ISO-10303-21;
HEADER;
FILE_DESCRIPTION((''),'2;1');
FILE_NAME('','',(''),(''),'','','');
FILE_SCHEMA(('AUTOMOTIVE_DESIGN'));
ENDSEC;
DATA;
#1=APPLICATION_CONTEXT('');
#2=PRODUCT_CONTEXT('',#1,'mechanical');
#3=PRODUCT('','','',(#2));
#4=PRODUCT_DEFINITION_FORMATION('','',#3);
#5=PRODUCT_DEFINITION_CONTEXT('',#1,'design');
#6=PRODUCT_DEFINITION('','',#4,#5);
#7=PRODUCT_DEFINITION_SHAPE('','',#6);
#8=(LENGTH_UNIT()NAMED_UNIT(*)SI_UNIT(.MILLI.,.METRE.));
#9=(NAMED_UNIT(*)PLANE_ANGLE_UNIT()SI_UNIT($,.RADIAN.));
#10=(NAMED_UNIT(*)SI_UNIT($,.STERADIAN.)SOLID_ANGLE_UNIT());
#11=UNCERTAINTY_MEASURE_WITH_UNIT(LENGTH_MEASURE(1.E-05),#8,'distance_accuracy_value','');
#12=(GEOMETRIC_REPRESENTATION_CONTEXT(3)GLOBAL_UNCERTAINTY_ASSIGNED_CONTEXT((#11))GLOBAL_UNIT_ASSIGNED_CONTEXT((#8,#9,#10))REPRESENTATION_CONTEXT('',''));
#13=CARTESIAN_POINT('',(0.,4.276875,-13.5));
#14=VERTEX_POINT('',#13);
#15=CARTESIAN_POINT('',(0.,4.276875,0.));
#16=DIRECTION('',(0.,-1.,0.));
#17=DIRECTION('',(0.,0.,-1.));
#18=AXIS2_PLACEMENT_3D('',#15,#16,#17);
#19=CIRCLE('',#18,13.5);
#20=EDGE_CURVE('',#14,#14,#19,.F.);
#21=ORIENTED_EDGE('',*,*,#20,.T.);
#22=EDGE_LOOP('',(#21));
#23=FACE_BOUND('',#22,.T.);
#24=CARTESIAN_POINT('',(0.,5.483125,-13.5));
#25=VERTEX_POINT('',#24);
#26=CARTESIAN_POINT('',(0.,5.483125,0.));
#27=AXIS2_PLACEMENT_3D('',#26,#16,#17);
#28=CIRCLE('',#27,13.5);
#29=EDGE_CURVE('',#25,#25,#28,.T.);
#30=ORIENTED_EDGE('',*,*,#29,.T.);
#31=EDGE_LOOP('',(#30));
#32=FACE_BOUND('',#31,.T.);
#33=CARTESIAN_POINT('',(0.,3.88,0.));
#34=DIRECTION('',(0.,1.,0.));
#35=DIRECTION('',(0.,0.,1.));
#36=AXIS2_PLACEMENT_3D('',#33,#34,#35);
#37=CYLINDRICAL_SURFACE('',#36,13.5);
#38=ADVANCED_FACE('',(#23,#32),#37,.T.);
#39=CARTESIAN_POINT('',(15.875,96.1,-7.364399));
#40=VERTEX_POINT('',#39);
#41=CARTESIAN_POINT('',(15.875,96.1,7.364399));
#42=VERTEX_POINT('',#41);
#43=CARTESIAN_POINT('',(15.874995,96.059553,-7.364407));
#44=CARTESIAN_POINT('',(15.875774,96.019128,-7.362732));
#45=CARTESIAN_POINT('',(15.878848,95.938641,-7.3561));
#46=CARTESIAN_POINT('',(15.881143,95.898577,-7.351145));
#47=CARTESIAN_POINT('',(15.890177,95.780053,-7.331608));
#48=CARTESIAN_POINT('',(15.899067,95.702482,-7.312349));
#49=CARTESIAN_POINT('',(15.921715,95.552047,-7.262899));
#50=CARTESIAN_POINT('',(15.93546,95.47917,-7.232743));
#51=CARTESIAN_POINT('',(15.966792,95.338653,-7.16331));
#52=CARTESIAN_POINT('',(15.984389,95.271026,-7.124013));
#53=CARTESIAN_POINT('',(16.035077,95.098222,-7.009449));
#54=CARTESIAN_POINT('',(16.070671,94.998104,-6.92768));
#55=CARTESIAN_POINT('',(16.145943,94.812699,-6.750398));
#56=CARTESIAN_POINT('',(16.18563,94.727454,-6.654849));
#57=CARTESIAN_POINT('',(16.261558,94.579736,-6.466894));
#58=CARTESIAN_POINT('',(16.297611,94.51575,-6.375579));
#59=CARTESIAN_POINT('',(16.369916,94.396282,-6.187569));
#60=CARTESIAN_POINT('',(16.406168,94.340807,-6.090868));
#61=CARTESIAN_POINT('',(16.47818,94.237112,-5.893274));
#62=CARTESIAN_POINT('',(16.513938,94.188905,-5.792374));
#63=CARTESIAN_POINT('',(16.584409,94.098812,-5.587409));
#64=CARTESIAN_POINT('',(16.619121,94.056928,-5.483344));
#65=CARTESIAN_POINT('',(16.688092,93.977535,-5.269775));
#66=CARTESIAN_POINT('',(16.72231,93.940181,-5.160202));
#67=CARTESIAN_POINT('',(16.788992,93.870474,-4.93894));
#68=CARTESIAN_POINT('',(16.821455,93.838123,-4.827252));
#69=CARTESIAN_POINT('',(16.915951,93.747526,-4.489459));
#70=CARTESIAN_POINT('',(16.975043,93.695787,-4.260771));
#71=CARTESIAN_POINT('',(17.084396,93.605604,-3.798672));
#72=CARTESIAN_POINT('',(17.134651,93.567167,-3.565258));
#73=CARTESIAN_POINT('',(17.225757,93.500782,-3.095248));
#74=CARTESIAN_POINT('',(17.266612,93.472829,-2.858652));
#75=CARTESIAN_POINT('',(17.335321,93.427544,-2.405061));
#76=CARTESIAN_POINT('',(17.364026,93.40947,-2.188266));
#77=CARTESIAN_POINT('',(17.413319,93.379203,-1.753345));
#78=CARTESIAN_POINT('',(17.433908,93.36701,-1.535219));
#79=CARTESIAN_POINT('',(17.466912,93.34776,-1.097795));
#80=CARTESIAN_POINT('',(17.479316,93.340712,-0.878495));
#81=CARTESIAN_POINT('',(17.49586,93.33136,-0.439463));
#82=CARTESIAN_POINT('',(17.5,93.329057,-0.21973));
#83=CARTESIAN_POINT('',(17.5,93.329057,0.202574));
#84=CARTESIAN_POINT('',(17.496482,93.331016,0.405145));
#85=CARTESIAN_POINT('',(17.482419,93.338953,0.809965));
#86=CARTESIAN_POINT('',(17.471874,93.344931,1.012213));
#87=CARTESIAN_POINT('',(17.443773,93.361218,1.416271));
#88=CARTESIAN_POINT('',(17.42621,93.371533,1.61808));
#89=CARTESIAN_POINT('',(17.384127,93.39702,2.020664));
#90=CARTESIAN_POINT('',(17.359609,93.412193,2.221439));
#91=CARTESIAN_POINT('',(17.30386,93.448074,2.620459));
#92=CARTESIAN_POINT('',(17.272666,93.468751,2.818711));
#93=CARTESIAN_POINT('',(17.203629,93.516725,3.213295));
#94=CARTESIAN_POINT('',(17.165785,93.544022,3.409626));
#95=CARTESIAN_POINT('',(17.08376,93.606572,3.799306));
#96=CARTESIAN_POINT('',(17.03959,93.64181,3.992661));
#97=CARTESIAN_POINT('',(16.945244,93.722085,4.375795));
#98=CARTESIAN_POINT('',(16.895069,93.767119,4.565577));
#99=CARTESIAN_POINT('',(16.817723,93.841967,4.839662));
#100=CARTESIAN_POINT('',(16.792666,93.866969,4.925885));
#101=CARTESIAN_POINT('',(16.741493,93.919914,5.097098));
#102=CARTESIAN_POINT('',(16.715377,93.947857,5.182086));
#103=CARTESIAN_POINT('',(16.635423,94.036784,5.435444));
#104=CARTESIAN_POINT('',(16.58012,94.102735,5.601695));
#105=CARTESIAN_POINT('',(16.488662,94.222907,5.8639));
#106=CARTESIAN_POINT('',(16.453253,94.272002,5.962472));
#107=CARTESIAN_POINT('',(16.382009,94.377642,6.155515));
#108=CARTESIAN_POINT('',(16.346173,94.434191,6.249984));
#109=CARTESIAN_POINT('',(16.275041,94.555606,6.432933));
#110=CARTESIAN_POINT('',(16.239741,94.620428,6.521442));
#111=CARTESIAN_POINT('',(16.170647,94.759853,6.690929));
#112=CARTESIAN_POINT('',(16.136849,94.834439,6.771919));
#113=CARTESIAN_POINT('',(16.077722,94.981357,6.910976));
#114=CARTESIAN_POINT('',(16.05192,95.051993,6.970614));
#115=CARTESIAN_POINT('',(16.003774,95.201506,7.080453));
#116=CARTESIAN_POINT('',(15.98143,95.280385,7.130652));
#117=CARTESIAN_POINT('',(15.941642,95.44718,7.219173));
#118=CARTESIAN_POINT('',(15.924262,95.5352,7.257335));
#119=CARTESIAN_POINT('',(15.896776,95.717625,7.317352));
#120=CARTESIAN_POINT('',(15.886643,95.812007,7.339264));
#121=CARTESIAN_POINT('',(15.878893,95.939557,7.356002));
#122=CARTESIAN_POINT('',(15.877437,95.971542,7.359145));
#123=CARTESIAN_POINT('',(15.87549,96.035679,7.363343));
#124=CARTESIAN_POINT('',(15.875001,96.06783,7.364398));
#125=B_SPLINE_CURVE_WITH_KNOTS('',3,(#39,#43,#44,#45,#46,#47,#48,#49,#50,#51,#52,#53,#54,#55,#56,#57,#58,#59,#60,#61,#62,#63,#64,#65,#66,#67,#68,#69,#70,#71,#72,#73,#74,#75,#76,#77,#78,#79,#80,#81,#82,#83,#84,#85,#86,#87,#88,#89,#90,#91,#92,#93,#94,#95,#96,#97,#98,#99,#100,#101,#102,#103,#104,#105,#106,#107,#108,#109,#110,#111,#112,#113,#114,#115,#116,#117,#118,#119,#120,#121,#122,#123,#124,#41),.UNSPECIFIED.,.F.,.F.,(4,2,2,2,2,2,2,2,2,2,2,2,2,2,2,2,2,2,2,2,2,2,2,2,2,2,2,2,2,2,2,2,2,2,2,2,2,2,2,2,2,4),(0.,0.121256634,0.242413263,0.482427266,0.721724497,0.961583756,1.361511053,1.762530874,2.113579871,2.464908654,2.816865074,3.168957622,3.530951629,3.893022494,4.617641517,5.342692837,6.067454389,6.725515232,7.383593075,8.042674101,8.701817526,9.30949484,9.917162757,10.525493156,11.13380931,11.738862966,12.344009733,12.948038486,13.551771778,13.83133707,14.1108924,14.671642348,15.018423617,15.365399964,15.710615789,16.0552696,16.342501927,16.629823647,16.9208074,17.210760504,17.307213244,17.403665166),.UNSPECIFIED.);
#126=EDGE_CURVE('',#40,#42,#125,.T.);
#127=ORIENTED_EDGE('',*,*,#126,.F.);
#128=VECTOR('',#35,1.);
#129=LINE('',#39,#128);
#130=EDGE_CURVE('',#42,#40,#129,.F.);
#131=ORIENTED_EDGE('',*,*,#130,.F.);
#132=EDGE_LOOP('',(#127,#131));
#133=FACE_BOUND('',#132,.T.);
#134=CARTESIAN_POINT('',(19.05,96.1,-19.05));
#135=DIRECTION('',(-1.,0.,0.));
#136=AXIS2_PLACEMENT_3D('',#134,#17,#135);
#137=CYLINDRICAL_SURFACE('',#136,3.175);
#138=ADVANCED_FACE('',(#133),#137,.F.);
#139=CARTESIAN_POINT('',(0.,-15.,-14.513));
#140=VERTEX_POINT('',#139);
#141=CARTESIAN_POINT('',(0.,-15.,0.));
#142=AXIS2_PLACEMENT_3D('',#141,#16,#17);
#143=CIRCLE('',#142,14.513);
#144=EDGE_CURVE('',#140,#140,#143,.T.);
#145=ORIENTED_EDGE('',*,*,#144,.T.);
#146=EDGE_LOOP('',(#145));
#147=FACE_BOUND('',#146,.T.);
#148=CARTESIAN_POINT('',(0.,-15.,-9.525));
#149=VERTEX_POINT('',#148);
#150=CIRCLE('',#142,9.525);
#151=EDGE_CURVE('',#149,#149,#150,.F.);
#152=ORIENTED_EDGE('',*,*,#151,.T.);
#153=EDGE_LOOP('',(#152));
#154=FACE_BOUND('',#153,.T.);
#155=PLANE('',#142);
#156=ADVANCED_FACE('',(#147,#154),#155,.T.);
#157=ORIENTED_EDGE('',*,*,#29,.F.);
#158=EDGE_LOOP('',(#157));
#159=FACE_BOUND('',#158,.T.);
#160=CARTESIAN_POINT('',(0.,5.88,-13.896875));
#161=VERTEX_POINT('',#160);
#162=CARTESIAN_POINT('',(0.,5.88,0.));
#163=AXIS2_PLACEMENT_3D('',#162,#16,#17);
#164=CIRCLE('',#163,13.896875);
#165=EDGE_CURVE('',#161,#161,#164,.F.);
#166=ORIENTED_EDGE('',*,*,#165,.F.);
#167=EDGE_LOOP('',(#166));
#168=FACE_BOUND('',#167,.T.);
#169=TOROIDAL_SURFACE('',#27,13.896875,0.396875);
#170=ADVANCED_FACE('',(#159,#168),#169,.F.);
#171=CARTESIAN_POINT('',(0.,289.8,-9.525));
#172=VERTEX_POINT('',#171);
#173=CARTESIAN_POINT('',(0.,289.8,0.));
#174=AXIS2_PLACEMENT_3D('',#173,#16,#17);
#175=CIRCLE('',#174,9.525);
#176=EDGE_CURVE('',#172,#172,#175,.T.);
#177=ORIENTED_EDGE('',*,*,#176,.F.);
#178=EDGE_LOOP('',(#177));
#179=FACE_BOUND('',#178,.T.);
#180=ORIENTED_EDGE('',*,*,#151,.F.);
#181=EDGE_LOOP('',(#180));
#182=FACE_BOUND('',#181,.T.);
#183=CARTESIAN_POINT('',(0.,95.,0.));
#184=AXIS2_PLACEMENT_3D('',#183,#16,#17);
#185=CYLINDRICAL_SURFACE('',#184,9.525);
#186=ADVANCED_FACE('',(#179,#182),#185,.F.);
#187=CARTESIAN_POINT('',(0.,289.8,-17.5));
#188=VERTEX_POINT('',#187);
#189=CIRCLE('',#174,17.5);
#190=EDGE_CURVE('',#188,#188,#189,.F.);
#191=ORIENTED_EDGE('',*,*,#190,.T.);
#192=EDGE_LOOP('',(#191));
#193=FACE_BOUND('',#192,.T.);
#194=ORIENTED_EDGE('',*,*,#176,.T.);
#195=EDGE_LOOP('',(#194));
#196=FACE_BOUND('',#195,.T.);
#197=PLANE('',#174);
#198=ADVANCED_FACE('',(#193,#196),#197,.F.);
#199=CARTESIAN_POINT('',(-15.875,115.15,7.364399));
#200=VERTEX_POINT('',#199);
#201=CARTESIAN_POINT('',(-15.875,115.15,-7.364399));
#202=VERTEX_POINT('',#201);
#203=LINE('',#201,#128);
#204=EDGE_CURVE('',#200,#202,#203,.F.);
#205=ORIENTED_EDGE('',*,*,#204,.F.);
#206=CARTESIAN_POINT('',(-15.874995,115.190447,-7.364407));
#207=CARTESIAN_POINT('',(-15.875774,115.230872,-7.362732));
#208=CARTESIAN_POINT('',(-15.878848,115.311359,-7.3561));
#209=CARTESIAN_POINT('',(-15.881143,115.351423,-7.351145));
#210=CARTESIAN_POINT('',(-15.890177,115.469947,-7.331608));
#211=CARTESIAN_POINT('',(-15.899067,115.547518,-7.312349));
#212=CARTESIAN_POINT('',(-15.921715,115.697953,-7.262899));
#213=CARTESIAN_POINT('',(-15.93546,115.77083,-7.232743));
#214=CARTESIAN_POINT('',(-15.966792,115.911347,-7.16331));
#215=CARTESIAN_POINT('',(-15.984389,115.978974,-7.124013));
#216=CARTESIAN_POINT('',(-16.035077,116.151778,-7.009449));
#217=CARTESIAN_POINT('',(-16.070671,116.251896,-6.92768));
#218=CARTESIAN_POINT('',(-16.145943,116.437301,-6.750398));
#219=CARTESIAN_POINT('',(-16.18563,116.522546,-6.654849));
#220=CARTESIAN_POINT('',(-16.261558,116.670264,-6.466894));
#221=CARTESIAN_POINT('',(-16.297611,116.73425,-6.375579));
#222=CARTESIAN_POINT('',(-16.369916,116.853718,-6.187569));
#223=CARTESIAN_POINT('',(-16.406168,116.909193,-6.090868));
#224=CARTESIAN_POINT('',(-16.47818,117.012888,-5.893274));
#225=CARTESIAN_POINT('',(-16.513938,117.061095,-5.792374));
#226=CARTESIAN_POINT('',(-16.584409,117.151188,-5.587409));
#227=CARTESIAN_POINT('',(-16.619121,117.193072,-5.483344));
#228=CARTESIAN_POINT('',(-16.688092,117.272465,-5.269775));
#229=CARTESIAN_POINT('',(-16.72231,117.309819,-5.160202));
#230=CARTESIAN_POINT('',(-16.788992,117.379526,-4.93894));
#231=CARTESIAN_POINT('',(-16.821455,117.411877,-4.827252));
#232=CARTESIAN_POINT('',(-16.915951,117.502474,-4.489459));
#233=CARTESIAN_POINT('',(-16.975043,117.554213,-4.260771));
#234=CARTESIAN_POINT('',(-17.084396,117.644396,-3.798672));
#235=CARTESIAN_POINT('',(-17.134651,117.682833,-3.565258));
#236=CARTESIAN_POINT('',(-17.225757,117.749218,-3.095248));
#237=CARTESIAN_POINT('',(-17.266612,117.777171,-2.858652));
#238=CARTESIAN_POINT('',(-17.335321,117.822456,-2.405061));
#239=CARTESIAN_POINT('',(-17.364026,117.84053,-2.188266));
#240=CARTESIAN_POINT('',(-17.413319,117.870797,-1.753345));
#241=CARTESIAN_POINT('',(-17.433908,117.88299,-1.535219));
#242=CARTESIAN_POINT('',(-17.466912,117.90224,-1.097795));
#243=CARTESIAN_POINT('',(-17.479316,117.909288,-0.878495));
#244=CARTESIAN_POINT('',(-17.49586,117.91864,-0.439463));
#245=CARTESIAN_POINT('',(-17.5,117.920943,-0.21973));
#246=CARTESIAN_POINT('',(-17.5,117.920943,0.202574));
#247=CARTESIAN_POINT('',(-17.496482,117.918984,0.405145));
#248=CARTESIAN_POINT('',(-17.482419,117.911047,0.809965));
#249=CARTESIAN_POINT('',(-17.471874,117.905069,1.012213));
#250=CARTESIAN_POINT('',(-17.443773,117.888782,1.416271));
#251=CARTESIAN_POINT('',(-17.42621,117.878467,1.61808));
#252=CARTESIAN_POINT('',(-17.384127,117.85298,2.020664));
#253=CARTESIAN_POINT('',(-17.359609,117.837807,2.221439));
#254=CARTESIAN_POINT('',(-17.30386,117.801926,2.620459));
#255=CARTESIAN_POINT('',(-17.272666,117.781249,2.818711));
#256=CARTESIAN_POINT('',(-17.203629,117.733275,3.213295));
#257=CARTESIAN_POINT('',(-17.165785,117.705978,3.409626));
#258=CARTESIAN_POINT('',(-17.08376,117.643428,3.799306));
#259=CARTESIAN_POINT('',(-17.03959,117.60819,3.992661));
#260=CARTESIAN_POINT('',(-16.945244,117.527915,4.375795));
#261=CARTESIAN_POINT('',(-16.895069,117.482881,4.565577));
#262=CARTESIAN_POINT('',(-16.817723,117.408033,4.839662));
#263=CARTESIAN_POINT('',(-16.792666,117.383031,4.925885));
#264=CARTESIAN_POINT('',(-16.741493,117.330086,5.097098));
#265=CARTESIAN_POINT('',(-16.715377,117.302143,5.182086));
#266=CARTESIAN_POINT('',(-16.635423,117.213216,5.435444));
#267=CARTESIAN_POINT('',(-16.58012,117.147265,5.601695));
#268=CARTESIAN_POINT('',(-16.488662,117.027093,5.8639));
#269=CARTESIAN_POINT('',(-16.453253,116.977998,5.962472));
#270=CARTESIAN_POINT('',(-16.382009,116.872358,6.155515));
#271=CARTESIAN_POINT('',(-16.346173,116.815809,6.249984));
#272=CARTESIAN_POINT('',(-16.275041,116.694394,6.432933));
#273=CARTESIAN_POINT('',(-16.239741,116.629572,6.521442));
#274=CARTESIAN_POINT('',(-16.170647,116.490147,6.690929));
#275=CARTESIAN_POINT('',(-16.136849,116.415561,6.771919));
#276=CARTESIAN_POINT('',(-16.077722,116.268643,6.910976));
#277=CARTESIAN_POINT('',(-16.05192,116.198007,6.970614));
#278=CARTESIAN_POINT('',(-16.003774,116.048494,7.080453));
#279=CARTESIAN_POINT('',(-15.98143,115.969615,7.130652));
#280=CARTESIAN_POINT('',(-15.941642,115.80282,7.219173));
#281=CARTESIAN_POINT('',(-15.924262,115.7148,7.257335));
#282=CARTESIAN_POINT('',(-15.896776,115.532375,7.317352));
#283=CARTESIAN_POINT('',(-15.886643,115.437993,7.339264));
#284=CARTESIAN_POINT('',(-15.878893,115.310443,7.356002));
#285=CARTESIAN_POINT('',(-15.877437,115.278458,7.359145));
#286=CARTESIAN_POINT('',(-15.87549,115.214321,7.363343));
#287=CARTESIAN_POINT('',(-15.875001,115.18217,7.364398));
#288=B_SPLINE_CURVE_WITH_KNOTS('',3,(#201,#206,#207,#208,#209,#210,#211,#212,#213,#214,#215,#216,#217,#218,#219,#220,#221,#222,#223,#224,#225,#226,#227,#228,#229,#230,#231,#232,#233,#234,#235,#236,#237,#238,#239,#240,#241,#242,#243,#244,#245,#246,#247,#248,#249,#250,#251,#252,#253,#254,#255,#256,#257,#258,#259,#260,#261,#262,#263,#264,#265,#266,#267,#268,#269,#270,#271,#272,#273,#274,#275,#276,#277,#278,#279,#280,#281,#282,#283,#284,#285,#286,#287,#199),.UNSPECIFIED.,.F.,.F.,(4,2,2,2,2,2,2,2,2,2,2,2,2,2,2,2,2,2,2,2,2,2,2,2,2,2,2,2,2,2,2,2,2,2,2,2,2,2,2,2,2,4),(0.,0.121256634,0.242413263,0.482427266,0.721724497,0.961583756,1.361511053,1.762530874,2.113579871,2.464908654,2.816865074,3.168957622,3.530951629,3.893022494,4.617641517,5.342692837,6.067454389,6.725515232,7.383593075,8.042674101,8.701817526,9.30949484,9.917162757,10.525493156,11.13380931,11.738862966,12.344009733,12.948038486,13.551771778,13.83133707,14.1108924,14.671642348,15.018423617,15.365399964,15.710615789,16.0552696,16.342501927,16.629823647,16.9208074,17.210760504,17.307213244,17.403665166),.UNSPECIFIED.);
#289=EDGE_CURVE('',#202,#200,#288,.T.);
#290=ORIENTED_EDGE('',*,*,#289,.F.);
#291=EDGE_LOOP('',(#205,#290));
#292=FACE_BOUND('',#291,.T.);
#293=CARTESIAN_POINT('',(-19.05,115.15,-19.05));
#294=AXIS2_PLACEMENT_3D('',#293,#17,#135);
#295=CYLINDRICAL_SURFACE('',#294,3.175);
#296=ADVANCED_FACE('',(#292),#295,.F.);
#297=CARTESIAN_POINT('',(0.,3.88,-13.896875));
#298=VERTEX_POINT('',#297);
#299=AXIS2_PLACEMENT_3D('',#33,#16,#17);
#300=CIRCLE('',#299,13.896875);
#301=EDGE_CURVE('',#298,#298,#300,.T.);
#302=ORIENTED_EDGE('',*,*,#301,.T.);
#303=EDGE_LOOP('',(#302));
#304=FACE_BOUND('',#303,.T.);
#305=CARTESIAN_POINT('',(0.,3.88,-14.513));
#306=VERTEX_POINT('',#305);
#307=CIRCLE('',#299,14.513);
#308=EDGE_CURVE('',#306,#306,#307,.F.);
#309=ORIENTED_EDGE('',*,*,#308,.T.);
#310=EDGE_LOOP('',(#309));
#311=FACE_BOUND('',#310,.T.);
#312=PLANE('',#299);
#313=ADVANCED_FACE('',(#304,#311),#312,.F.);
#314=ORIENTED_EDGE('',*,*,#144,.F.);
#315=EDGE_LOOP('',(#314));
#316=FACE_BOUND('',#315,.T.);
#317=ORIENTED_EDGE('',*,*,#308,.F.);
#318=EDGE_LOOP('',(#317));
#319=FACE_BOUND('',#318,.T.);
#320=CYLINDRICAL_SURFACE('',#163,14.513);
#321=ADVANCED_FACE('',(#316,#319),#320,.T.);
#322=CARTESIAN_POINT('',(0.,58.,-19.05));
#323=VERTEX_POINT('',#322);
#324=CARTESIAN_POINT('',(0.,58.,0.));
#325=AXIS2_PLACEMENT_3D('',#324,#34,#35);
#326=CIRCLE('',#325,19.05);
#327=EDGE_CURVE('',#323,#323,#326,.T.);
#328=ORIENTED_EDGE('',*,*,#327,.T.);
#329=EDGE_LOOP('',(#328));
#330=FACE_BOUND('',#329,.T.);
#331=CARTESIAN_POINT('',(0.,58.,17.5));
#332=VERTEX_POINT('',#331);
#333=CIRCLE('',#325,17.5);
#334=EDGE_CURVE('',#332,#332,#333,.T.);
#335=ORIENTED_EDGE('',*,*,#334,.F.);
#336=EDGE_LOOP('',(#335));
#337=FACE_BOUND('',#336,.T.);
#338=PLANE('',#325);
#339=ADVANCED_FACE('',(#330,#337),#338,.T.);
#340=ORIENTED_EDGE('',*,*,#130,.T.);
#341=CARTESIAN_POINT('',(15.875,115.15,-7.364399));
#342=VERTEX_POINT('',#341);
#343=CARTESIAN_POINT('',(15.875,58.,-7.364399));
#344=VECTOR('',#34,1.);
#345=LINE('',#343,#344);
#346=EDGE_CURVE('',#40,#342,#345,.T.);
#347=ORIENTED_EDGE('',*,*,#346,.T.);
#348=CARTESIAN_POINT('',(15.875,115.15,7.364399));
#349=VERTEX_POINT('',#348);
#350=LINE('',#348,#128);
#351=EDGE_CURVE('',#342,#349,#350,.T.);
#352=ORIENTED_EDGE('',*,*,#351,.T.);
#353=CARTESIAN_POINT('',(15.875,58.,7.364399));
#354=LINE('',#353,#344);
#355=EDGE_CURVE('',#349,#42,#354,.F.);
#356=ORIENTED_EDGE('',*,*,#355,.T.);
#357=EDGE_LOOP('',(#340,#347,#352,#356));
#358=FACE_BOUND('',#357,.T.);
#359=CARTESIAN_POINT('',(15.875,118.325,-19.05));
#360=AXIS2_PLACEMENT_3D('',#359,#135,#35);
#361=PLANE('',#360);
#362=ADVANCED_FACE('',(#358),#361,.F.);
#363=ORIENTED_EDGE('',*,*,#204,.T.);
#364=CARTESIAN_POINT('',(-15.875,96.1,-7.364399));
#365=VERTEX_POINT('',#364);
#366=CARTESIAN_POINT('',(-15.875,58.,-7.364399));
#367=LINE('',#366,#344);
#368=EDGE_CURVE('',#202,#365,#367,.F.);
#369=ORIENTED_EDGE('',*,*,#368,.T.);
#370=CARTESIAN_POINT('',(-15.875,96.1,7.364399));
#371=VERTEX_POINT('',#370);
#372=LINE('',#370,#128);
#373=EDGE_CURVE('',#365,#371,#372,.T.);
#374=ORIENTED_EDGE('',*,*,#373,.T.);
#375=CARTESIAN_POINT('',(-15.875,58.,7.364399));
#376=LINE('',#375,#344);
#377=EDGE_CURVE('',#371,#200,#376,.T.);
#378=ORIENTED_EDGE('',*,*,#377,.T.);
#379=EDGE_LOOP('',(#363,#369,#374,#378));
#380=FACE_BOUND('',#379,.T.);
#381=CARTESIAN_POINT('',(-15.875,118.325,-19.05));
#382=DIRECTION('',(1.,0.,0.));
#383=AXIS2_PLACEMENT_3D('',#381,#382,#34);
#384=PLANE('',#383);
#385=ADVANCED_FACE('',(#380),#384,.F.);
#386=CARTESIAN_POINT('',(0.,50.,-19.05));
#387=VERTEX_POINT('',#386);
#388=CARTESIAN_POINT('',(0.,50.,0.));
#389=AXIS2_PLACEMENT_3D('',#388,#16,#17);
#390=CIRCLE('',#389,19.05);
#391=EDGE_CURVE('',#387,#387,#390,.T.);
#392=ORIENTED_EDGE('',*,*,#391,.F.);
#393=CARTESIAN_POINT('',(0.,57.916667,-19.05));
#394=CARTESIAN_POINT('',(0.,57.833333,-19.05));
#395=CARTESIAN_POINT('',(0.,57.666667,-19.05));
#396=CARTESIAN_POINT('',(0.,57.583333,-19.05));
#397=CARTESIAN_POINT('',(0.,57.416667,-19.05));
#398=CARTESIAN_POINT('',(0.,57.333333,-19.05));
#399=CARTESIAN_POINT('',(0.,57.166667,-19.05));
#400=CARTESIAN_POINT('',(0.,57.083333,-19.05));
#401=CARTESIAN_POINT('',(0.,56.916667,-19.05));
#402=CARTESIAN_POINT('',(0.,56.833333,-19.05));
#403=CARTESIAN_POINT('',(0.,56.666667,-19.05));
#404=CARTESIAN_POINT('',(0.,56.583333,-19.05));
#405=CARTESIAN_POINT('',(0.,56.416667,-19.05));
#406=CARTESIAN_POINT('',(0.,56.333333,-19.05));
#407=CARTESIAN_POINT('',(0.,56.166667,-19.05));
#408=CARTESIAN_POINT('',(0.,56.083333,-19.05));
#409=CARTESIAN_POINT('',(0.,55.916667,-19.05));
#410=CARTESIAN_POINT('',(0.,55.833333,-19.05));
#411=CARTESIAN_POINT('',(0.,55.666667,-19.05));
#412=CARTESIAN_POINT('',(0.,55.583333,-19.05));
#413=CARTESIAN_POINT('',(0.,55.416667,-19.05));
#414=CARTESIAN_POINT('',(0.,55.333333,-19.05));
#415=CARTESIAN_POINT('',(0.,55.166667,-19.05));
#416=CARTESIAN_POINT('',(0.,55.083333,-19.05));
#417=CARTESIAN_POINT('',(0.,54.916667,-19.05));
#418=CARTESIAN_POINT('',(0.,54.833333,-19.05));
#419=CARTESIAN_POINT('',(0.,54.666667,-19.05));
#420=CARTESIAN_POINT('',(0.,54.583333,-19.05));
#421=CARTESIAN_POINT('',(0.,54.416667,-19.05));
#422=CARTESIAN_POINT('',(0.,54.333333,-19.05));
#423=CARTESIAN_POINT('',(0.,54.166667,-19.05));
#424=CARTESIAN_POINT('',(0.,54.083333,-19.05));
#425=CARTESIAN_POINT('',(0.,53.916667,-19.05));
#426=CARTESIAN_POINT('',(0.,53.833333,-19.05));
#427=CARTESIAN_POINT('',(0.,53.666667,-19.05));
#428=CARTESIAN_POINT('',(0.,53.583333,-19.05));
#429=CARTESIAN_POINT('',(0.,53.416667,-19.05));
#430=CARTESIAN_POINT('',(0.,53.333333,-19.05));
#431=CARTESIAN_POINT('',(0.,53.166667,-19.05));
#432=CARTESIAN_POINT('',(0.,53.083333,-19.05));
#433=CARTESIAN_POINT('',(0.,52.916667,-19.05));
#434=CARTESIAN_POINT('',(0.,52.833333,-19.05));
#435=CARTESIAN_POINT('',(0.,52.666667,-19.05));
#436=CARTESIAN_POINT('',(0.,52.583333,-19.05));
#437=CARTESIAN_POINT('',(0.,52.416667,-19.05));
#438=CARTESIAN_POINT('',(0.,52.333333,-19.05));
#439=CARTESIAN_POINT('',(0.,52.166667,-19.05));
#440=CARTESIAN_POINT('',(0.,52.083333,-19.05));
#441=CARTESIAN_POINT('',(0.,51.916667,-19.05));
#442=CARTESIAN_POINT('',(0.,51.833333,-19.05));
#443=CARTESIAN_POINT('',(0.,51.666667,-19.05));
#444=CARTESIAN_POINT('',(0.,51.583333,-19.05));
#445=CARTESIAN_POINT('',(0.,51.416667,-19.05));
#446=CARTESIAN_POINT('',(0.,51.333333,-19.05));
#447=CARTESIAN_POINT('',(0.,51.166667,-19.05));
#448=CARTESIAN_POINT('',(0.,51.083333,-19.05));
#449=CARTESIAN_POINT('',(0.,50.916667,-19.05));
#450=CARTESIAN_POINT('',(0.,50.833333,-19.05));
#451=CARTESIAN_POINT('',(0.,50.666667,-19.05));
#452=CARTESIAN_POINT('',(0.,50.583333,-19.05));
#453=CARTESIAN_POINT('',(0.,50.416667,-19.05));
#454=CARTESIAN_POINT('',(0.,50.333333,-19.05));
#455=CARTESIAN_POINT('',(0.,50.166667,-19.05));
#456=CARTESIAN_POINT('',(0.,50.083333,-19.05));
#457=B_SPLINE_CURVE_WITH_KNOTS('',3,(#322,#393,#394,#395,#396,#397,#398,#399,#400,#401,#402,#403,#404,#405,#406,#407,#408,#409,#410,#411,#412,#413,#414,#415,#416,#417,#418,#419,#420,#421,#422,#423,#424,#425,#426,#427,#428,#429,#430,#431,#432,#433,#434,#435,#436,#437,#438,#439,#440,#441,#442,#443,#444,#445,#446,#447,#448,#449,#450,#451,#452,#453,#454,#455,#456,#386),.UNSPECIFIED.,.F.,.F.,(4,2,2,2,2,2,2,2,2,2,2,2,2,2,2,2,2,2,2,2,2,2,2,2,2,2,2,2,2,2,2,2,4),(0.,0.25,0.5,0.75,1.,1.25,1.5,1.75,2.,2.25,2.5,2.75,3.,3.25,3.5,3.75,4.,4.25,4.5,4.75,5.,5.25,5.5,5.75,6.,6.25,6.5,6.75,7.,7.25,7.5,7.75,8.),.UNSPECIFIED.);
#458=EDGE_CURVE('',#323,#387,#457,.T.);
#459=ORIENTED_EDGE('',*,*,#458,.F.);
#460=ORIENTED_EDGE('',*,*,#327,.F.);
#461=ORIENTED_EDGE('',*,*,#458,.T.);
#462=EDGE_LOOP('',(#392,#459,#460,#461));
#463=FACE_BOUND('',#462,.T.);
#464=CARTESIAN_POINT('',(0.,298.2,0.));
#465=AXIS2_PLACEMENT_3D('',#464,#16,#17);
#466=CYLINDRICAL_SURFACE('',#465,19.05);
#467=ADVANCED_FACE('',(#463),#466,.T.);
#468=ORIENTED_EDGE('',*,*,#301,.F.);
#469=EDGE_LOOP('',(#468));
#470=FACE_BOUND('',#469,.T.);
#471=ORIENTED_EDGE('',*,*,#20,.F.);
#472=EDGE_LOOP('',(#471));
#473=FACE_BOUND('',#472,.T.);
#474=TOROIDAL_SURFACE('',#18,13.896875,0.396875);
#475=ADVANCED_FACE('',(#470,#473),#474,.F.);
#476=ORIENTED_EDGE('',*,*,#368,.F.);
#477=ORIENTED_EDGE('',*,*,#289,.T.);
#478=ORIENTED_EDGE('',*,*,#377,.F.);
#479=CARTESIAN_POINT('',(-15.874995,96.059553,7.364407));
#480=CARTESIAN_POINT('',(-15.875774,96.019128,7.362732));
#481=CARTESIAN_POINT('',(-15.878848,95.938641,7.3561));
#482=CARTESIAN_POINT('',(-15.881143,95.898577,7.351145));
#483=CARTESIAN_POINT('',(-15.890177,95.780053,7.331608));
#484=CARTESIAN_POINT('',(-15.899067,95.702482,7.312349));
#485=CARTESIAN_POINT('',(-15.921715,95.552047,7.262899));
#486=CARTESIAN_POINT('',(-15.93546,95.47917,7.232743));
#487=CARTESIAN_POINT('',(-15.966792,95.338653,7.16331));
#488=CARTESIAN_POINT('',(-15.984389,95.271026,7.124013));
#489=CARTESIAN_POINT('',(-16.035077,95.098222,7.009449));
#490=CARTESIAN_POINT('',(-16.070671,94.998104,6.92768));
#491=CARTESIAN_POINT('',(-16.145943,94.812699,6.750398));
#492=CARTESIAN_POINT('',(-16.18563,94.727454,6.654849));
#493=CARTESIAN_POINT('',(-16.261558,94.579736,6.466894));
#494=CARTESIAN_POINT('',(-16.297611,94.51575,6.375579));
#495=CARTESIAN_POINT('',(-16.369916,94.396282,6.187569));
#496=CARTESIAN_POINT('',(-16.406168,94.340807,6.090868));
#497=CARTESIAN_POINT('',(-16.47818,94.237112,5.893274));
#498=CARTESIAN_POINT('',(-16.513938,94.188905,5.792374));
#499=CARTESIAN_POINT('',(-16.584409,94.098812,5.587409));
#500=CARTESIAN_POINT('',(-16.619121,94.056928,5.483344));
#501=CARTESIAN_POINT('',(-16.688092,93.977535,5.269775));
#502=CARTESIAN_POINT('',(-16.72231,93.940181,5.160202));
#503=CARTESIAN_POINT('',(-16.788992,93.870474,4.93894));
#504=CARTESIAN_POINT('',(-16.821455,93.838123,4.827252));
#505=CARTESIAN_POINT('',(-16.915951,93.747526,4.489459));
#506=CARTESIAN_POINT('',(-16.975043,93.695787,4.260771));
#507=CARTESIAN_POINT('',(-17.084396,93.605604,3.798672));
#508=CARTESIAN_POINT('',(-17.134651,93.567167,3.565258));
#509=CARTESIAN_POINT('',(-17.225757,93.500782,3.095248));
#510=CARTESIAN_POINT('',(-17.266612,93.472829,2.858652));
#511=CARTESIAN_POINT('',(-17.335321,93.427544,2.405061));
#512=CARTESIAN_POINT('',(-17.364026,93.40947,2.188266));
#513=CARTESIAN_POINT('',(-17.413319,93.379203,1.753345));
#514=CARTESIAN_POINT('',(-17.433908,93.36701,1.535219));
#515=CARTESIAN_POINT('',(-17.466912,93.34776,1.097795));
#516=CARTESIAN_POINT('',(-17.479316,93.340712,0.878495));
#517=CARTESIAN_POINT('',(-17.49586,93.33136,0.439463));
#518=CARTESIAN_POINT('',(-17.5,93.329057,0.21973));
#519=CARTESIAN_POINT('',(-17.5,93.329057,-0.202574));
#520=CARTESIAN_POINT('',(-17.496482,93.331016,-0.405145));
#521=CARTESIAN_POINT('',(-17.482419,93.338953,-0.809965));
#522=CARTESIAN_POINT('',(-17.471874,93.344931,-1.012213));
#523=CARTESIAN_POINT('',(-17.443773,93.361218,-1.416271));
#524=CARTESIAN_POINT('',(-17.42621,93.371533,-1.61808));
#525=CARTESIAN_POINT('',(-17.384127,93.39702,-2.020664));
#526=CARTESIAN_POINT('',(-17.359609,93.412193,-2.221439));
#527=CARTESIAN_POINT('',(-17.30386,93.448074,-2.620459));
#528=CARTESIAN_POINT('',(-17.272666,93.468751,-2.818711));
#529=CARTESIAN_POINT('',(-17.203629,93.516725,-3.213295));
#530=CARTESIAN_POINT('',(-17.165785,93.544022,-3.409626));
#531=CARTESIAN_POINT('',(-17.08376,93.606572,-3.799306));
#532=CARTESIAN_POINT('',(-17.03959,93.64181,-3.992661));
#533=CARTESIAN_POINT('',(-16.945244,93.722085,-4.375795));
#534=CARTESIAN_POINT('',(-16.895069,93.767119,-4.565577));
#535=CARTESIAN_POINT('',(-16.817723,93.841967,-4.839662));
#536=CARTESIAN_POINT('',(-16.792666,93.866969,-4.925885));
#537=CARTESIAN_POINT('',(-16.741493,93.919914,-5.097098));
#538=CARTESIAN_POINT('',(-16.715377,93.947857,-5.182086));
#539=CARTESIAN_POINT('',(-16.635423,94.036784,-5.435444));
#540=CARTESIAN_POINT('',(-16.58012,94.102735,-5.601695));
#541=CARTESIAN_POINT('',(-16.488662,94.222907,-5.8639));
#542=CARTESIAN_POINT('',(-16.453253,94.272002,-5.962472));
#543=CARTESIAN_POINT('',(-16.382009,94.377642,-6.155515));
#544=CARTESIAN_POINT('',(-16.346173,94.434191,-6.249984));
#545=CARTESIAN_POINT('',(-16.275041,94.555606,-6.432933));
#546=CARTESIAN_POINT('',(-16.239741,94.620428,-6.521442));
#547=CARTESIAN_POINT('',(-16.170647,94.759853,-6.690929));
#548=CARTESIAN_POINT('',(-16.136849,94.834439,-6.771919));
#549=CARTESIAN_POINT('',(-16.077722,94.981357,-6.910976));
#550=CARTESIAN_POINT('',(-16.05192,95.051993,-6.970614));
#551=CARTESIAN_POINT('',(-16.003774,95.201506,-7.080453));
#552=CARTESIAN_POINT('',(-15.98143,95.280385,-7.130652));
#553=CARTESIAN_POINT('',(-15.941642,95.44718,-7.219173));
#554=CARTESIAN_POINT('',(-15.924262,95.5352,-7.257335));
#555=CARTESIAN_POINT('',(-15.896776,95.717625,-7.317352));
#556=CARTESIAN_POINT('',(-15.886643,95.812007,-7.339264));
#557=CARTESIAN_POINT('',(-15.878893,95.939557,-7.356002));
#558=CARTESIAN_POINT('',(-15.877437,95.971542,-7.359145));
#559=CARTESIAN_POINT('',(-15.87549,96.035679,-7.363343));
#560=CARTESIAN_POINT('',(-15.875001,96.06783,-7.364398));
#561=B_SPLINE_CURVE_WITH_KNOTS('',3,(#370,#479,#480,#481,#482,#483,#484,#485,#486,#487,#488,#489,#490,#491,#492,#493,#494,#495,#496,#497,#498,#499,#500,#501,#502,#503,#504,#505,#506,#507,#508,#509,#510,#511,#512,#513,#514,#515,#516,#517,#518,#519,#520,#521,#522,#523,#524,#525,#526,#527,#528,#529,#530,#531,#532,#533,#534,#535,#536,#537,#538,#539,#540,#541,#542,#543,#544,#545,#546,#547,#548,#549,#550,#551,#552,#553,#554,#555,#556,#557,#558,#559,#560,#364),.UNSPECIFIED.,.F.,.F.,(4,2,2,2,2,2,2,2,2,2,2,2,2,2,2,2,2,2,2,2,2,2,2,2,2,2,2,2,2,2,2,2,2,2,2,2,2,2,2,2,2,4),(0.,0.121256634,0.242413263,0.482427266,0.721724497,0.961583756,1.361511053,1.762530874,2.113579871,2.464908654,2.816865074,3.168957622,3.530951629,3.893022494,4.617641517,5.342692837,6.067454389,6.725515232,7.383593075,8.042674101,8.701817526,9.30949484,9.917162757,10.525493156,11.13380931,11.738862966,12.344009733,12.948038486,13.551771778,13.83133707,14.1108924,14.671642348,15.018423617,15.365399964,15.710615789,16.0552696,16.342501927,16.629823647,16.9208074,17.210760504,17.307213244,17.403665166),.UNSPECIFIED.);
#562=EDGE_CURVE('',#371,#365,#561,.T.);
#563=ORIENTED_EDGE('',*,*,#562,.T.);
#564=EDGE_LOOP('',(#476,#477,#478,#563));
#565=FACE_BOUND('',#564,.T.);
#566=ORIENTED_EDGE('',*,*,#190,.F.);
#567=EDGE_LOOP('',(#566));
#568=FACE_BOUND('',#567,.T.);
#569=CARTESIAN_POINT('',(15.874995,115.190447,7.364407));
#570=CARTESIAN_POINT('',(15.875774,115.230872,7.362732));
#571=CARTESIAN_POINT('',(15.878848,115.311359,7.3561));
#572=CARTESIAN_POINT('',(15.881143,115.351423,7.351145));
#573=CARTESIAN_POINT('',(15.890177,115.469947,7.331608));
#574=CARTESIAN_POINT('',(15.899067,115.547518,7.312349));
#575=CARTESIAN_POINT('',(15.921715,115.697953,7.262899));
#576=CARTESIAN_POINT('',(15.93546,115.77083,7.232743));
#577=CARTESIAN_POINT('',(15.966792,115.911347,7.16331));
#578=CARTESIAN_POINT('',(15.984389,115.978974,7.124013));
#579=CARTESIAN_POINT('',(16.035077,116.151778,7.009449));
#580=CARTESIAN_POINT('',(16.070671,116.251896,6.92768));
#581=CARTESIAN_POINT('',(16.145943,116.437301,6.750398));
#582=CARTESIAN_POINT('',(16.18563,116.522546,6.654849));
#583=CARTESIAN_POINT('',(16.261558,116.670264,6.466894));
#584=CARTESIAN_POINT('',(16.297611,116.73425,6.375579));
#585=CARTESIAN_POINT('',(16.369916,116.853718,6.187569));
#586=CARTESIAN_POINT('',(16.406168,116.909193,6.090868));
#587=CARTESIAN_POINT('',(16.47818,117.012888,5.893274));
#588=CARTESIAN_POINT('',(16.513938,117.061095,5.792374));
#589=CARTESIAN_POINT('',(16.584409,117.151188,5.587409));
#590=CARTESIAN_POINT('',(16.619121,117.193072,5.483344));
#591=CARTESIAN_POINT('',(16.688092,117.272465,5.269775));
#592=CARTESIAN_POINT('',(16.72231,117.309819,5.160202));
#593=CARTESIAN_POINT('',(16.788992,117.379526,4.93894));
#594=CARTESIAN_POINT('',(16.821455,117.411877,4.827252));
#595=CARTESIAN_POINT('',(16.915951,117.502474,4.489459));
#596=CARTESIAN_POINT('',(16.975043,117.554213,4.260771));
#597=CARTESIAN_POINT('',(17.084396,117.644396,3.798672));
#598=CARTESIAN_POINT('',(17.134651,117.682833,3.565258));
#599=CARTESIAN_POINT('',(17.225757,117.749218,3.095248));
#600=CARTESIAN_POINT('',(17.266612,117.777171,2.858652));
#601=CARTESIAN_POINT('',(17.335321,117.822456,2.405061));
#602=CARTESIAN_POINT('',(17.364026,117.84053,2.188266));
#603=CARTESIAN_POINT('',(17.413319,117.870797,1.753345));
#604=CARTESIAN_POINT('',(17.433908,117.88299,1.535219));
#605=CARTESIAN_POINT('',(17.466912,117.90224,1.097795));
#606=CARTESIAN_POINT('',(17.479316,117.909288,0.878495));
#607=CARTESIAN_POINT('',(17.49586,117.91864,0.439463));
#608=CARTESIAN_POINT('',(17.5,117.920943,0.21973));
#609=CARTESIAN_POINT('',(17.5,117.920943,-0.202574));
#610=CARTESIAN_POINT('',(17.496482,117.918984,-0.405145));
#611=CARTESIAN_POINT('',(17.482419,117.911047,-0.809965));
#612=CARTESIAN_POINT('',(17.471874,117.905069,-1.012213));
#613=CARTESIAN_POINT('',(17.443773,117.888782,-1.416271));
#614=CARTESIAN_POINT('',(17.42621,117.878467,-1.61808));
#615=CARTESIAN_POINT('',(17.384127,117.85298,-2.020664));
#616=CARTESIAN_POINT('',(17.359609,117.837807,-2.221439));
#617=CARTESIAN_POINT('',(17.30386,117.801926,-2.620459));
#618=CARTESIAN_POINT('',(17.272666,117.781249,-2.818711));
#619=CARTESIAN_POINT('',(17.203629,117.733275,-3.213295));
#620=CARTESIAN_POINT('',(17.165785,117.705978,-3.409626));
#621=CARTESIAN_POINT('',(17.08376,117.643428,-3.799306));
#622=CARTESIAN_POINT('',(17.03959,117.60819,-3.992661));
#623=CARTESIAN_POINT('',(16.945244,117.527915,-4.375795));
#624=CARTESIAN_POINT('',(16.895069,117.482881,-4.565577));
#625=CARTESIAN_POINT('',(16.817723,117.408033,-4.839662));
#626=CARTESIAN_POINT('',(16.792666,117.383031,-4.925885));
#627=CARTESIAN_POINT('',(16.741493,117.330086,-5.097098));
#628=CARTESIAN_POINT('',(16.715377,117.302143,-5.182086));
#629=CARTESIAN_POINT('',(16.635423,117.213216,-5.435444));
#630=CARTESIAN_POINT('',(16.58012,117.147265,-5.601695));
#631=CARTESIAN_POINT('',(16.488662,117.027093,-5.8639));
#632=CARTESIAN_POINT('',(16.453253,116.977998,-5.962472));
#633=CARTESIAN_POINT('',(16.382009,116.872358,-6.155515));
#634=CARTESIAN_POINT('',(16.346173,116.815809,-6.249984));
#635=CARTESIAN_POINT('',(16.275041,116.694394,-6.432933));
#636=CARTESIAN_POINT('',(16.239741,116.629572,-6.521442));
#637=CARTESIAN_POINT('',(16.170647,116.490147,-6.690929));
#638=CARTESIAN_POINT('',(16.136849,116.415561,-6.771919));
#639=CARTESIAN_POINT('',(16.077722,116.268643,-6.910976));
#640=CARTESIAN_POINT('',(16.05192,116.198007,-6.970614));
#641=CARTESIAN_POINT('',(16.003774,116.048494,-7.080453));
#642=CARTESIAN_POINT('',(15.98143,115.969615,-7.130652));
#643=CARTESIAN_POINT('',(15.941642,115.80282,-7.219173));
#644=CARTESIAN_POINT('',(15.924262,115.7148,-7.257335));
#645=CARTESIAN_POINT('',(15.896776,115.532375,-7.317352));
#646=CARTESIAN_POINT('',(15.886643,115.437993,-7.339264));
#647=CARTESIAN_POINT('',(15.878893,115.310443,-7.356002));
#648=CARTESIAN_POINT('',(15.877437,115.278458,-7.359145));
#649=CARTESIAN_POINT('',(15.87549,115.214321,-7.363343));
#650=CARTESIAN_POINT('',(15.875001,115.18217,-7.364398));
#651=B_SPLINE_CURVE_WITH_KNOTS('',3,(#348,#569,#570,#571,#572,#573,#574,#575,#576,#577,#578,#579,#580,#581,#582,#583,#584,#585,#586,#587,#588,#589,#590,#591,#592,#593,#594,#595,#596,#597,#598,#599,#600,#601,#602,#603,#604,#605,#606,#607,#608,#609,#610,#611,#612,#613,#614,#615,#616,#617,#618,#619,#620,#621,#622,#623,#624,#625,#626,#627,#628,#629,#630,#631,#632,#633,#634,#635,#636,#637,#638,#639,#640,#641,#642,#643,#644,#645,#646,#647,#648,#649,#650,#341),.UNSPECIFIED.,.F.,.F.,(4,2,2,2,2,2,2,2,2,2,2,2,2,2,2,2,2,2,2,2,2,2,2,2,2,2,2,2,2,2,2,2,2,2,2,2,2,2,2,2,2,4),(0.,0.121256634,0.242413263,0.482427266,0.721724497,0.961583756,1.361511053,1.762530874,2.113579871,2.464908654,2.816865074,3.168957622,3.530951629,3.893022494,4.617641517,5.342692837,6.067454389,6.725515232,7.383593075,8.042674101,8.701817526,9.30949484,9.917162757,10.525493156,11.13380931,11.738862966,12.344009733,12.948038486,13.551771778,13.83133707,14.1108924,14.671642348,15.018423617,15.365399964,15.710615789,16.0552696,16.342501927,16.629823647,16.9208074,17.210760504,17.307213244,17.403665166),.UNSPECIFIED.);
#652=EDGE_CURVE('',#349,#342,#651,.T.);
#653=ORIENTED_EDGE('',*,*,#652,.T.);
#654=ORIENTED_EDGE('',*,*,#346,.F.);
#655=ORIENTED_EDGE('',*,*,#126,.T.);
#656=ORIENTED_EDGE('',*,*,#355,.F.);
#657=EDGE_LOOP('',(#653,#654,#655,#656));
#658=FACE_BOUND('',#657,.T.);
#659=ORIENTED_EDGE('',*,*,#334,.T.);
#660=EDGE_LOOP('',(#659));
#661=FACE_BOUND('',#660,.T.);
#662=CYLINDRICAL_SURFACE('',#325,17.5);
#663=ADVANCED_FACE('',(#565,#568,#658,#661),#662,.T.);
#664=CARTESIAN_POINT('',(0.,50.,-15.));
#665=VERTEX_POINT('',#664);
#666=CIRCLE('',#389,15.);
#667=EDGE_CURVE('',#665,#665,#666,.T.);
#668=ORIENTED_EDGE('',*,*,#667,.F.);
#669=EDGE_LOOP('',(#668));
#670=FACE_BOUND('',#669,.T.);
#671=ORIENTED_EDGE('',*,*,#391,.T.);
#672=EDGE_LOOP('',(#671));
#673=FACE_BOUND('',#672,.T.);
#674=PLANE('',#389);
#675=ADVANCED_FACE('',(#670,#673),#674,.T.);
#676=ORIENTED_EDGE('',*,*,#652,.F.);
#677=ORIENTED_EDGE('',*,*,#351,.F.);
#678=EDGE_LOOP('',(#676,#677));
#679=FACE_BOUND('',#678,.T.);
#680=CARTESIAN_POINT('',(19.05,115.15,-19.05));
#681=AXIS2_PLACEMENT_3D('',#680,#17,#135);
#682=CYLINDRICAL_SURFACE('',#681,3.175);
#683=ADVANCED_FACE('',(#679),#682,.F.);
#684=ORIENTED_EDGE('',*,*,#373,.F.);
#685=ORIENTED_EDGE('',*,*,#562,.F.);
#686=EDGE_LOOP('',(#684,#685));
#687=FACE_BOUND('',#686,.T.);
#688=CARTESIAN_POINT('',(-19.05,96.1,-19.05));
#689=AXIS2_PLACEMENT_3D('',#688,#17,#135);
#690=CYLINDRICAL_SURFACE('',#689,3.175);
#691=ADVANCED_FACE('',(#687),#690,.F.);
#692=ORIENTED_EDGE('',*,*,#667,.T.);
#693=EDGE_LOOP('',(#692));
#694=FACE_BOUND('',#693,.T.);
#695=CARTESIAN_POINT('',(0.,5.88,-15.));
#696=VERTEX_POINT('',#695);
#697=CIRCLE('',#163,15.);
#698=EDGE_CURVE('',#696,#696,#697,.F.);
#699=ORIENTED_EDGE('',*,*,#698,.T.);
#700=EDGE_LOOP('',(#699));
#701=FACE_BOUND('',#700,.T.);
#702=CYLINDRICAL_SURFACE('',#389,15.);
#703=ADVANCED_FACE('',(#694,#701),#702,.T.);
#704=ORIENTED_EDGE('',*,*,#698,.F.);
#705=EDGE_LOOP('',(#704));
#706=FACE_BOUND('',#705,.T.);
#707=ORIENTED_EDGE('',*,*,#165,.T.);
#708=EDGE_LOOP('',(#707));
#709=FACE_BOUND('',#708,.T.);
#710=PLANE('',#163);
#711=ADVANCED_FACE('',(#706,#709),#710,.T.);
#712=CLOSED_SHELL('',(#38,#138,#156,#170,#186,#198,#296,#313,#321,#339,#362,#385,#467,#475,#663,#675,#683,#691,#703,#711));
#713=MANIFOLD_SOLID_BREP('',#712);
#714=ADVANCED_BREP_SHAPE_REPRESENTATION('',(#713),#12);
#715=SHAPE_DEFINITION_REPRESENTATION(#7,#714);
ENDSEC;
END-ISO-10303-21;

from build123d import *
from build123d.topology import SkipClean

# Parameters (mm, degrees)
SKETCH1_R               = 22.5
SKETCH1_R_2             = 9.525
BOSS_EXTRUDE1_DEPTH     = 95
SKETCH2_OUTSIDE_W       = 69.87
SKETCH2_OUTSIDE_H       = 69.87
SKETCH2_OUTSIDE_R       = 15
CUT_EXTRUDE1_DEPTH      = 50
SKETCH4_OUTSIDE_W       = 69.87
SKETCH4_OUTSIDE_H       = 69.87
SKETCH4_OUTSIDE_R       = 17.5
CUT_EXTRUDE2_DEPTH      = 37
SKETCH11_OUTSIDE_W      = 69.87
SKETCH11_OUTSIDE_H      = 69.87
SKETCH11_OUTSIDE_R      = 14.513
CUT_EXTRUDE3_DEPTH      = 5.88
SKETCH12_R              = 17.5
SKETCH12_R_2            = 9.525
BOSS_EXTRUDE2_DEPTH     = 203.2
BOSS_EXTRUDE3_START     = 15
SKETCH13_R              = 14.513
SKETCH13_R_2            = 9.525
BOSS_EXTRUDE3_DEPTH     = 15
SKETCH15_OUTSIDE_W      = 110.92
SKETCH15_OUTSIDE_H      = 110.92
SKETCH15_OUTSIDE_R      = 19.05
CUT_EXTRUDE5_DEPTH      = 251.231372933
SKETCH16_OUTSIDE_W      = 103.66
SKETCH16_OUTSIDE_H      = 103.66
SKETCH16_OUTSIDE_R      = 13.5
CUT_EXTRUDE6_DEPTH      = 2
FILLET2_R               = 0.396875
SKETCH17_R              = 17.5
CUT_EXTRUDE7_DEPTH      = 8.4
CUT_EXTRUDE8_DEPTH      = 292.049557636
CUT_EXTRUDE8_DEPTH_BACK = 292.049557636
SKETCH20_W              = 3.175
SKETCH20_H              = 25.4
FILLET3_R               = 3.175


with BuildPart() as part:
    # Sketch1 → Boss-Extrude1 (new body)
    with BuildSketch(Plane(origin=(0, 0, 0), x_dir=(1, 0, 0), z_dir=(0, 1, 0))):
        with Locations(Location((0, 0, 0), (0, 0, 270))):
            Circle(SKETCH1_R)
        with Locations(Location((0, 0, 0), (0, 0, 270))):
            Circle(SKETCH1_R_2, mode=Mode.SUBTRACT)
    extrude(amount=BOSS_EXTRUDE1_DEPTH)

    # Sketch2 outside → Cut-Extrude1 (cut)
    with BuildSketch(Plane.XZ):
        Rectangle(SKETCH2_OUTSIDE_W, SKETCH2_OUTSIDE_H)
        with Locations(Location((0, 0, 0), (0, 0, 270))):
            Circle(SKETCH2_OUTSIDE_R, mode=Mode.SUBTRACT)
    extrude(amount=-CUT_EXTRUDE1_DEPTH, mode=Mode.SUBTRACT)

    # Sketch4 outside → Cut-Extrude2 (cut)
    with BuildSketch(Plane(origin=(0, 95, 0), x_dir=(1, 0, 0), z_dir=(0, 1, 0))):
        Rectangle(SKETCH4_OUTSIDE_W, SKETCH4_OUTSIDE_H)
        with Locations(Location((0, 0, 0), (0, 0, 270))):
            Circle(SKETCH4_OUTSIDE_R, mode=Mode.SUBTRACT)
    extrude(amount=-CUT_EXTRUDE2_DEPTH, mode=Mode.SUBTRACT)

    # Sketch11 outside → Cut-Extrude3 (cut)
    with BuildSketch(Plane.XZ):
        Rectangle(SKETCH11_OUTSIDE_W, SKETCH11_OUTSIDE_H)
        with Locations(Location((0, 0, 0), (0, 0, 270))):
            Circle(SKETCH11_OUTSIDE_R, mode=Mode.SUBTRACT)
    extrude(amount=-CUT_EXTRUDE3_DEPTH, mode=Mode.SUBTRACT)

    # Sketch12 → Boss-Extrude2 (add)
    with BuildSketch(Plane(origin=(0, 95, 0), x_dir=(1, 0, 0), z_dir=(0, 1, 0))):
        with Locations(Location((0, 0, 0), (0, 0, 270))):
            Circle(SKETCH12_R)
        with Locations(Location((0, 0, 0), (0, 0, 270))):
            Circle(SKETCH12_R_2, mode=Mode.SUBTRACT)
    extrude(amount=BOSS_EXTRUDE2_DEPTH)

    # Sketch13 → Boss-Extrude3 (add)
    with SkipClean():  # the faces are left unmerged after this step: merging them gives an invalid solid
        with BuildSketch(Plane.XZ.offset(BOSS_EXTRUDE3_START)):
            with Locations(Location((0, 0, 0), (0, 0, 270))):
                Circle(SKETCH13_R)
            with Locations(Location((0, 0, 0), (0, 0, 270))):
                Circle(SKETCH13_R_2, mode=Mode.SUBTRACT)
        extrude(amount=-BOSS_EXTRUDE3_DEPTH)

    # Sketch15 outside → Cut-Extrude5 (cut, through all)
    with SkipClean():  # the faces are left unmerged after this step: merging them gives an invalid solid
        with BuildSketch(Plane.XZ.offset(-50)):
            Rectangle(SKETCH15_OUTSIDE_W, SKETCH15_OUTSIDE_H)
            with Locations(Location((0, 0, 0), (0, 0, 270))):
                Circle(SKETCH15_OUTSIDE_R, mode=Mode.SUBTRACT)
        extrude(amount=-CUT_EXTRUDE5_DEPTH, mode=Mode.SUBTRACT)

    # Sketch16 outside → Cut-Extrude6 (cut)
    with SkipClean():  # the faces are left unmerged after this step: merging them gives an invalid solid
        with BuildSketch(Plane.XZ.offset(-5.88)):
            Rectangle(SKETCH16_OUTSIDE_W, SKETCH16_OUTSIDE_H)
            with Locations(Location((0, 0, 0), (0, 0, 270))):
                Circle(SKETCH16_OUTSIDE_R, mode=Mode.SUBTRACT)
        extrude(amount=CUT_EXTRUDE6_DEPTH, mode=Mode.SUBTRACT)

    # Fillet2
    fillet2_edges = [part.edges().sort_by_distance(p)[0] for p in [
        (0, 5.88, 13.5),
        (0, 3.88, 13.5),
    ]]
    fillet(fillet2_edges, radius=FILLET2_R)

    # Sketch17 → Cut-Extrude7 (cut)
    with BuildSketch(Plane(origin=(0, 298.2, 0), x_dir=(1, 0, 0), z_dir=(0, 1, 0))):
        with Locations(Location((0, 0, 0), (0, 0, 270))):
            Circle(SKETCH17_R)
    extrude(amount=-CUT_EXTRUDE7_DEPTH, mode=Mode.SUBTRACT)

    # Sketch20 → Cut-Extrude8 (cut, two sides: drawn at the far end of the back side and taken through both)
    with BuildSketch(Plane.XY.offset(-CUT_EXTRUDE8_DEPTH_BACK)):
        with Locations((-17.4625, 105.625)):
            Rectangle(SKETCH20_W, SKETCH20_H)
        with Locations((17.4625, 105.625)):
            Rectangle(SKETCH20_W, SKETCH20_H)
    extrude(amount=CUT_EXTRUDE8_DEPTH + CUT_EXTRUDE8_DEPTH_BACK, mode=Mode.SUBTRACT)

    # Fillet3
    # the kernel refuses this fillet: 3.175 mm, written as the material it adds along each edge
    with BuildSketch(Plane(origin=(-15.875, 92.925, 15.301899161), x_dir=(0, 1, 0), z_dir=(0, 0, -1))) as fillet3_piece_1_section:
        with BuildLine():
            CenterArc((FILLET3_R, -FILLET3_R), FILLET3_R, 90, 90)
            Line((0, -FILLET3_R), (0, 0))
            Line((0, 0), (FILLET3_R, 0))
        make_face()
    fillet3_piece_1 = extrude(amount=30.603798322, mode=Mode.PRIVATE)
    fillet3_piece_1 = fillet3_piece_1 & Plane(origin=(0, 93.819377515, 0), x_dir=(0, 0, 1), z_dir=(0, 1, 0)) * Cylinder(17.5, 74, mode=Mode.PRIVATE)
    add(fillet3_piece_1)
    with BuildSketch(Plane(origin=(-15.875, 118.325, 15.301899161), x_dir=(0, -1, 0), z_dir=(0, 0, -1))) as fillet3_piece_2_section:
        with BuildLine():
            CenterArc((FILLET3_R, FILLET3_R), FILLET3_R, 180, 90)
            Line((0, FILLET3_R), (0, 0))
            Line((0, 0), (FILLET3_R, 0))
        make_face()
    fillet3_piece_2 = extrude(amount=30.603798322, mode=Mode.PRIVATE)
    fillet3_piece_2 = fillet3_piece_2 & Plane(origin=(0, 117.430622485, 0), x_dir=(0, 0, 1), z_dir=(0, 1, 0)) * Cylinder(17.5, 74, mode=Mode.PRIVATE)
    add(fillet3_piece_2)
    with BuildSketch(Plane(origin=(15.875, 92.925, -15.301899161), x_dir=(0, 1, 0), z_dir=(0, 0, 1))) as fillet3_piece_3_section:
        with BuildLine():
            CenterArc((FILLET3_R, -FILLET3_R), FILLET3_R, 90, 90)
            Line((0, -FILLET3_R), (0, 0))
            Line((0, 0), (FILLET3_R, 0))
        make_face()
    fillet3_piece_3 = extrude(amount=30.603798322, mode=Mode.PRIVATE)
    fillet3_piece_3 = fillet3_piece_3 & Plane(origin=(0, 93.81935464, 0), x_dir=(0, 0, 1), z_dir=(0, 1, 0)) * Cylinder(17.5, 74, mode=Mode.PRIVATE)
    add(fillet3_piece_3)
    with BuildSketch(Plane(origin=(15.875, 118.325, -15.301899161), x_dir=(0, -1, 0), z_dir=(0, 0, 1))) as fillet3_piece_4_section:
        with BuildLine():
            CenterArc((FILLET3_R, FILLET3_R), FILLET3_R, 180, 90)
            Line((0, FILLET3_R), (0, 0))
            Line((0, 0), (FILLET3_R, 0))
        make_face()
    fillet3_piece_4 = extrude(amount=30.603798322, mode=Mode.PRIVATE)
    fillet3_piece_4 = fillet3_piece_4 & Plane(origin=(0, 117.43064536, 0), x_dir=(0, 0, 1), z_dir=(0, 1, 0)) * Cylinder(17.5, 74, mode=Mode.PRIVATE)
    add(fillet3_piece_4)


solid = part.part
